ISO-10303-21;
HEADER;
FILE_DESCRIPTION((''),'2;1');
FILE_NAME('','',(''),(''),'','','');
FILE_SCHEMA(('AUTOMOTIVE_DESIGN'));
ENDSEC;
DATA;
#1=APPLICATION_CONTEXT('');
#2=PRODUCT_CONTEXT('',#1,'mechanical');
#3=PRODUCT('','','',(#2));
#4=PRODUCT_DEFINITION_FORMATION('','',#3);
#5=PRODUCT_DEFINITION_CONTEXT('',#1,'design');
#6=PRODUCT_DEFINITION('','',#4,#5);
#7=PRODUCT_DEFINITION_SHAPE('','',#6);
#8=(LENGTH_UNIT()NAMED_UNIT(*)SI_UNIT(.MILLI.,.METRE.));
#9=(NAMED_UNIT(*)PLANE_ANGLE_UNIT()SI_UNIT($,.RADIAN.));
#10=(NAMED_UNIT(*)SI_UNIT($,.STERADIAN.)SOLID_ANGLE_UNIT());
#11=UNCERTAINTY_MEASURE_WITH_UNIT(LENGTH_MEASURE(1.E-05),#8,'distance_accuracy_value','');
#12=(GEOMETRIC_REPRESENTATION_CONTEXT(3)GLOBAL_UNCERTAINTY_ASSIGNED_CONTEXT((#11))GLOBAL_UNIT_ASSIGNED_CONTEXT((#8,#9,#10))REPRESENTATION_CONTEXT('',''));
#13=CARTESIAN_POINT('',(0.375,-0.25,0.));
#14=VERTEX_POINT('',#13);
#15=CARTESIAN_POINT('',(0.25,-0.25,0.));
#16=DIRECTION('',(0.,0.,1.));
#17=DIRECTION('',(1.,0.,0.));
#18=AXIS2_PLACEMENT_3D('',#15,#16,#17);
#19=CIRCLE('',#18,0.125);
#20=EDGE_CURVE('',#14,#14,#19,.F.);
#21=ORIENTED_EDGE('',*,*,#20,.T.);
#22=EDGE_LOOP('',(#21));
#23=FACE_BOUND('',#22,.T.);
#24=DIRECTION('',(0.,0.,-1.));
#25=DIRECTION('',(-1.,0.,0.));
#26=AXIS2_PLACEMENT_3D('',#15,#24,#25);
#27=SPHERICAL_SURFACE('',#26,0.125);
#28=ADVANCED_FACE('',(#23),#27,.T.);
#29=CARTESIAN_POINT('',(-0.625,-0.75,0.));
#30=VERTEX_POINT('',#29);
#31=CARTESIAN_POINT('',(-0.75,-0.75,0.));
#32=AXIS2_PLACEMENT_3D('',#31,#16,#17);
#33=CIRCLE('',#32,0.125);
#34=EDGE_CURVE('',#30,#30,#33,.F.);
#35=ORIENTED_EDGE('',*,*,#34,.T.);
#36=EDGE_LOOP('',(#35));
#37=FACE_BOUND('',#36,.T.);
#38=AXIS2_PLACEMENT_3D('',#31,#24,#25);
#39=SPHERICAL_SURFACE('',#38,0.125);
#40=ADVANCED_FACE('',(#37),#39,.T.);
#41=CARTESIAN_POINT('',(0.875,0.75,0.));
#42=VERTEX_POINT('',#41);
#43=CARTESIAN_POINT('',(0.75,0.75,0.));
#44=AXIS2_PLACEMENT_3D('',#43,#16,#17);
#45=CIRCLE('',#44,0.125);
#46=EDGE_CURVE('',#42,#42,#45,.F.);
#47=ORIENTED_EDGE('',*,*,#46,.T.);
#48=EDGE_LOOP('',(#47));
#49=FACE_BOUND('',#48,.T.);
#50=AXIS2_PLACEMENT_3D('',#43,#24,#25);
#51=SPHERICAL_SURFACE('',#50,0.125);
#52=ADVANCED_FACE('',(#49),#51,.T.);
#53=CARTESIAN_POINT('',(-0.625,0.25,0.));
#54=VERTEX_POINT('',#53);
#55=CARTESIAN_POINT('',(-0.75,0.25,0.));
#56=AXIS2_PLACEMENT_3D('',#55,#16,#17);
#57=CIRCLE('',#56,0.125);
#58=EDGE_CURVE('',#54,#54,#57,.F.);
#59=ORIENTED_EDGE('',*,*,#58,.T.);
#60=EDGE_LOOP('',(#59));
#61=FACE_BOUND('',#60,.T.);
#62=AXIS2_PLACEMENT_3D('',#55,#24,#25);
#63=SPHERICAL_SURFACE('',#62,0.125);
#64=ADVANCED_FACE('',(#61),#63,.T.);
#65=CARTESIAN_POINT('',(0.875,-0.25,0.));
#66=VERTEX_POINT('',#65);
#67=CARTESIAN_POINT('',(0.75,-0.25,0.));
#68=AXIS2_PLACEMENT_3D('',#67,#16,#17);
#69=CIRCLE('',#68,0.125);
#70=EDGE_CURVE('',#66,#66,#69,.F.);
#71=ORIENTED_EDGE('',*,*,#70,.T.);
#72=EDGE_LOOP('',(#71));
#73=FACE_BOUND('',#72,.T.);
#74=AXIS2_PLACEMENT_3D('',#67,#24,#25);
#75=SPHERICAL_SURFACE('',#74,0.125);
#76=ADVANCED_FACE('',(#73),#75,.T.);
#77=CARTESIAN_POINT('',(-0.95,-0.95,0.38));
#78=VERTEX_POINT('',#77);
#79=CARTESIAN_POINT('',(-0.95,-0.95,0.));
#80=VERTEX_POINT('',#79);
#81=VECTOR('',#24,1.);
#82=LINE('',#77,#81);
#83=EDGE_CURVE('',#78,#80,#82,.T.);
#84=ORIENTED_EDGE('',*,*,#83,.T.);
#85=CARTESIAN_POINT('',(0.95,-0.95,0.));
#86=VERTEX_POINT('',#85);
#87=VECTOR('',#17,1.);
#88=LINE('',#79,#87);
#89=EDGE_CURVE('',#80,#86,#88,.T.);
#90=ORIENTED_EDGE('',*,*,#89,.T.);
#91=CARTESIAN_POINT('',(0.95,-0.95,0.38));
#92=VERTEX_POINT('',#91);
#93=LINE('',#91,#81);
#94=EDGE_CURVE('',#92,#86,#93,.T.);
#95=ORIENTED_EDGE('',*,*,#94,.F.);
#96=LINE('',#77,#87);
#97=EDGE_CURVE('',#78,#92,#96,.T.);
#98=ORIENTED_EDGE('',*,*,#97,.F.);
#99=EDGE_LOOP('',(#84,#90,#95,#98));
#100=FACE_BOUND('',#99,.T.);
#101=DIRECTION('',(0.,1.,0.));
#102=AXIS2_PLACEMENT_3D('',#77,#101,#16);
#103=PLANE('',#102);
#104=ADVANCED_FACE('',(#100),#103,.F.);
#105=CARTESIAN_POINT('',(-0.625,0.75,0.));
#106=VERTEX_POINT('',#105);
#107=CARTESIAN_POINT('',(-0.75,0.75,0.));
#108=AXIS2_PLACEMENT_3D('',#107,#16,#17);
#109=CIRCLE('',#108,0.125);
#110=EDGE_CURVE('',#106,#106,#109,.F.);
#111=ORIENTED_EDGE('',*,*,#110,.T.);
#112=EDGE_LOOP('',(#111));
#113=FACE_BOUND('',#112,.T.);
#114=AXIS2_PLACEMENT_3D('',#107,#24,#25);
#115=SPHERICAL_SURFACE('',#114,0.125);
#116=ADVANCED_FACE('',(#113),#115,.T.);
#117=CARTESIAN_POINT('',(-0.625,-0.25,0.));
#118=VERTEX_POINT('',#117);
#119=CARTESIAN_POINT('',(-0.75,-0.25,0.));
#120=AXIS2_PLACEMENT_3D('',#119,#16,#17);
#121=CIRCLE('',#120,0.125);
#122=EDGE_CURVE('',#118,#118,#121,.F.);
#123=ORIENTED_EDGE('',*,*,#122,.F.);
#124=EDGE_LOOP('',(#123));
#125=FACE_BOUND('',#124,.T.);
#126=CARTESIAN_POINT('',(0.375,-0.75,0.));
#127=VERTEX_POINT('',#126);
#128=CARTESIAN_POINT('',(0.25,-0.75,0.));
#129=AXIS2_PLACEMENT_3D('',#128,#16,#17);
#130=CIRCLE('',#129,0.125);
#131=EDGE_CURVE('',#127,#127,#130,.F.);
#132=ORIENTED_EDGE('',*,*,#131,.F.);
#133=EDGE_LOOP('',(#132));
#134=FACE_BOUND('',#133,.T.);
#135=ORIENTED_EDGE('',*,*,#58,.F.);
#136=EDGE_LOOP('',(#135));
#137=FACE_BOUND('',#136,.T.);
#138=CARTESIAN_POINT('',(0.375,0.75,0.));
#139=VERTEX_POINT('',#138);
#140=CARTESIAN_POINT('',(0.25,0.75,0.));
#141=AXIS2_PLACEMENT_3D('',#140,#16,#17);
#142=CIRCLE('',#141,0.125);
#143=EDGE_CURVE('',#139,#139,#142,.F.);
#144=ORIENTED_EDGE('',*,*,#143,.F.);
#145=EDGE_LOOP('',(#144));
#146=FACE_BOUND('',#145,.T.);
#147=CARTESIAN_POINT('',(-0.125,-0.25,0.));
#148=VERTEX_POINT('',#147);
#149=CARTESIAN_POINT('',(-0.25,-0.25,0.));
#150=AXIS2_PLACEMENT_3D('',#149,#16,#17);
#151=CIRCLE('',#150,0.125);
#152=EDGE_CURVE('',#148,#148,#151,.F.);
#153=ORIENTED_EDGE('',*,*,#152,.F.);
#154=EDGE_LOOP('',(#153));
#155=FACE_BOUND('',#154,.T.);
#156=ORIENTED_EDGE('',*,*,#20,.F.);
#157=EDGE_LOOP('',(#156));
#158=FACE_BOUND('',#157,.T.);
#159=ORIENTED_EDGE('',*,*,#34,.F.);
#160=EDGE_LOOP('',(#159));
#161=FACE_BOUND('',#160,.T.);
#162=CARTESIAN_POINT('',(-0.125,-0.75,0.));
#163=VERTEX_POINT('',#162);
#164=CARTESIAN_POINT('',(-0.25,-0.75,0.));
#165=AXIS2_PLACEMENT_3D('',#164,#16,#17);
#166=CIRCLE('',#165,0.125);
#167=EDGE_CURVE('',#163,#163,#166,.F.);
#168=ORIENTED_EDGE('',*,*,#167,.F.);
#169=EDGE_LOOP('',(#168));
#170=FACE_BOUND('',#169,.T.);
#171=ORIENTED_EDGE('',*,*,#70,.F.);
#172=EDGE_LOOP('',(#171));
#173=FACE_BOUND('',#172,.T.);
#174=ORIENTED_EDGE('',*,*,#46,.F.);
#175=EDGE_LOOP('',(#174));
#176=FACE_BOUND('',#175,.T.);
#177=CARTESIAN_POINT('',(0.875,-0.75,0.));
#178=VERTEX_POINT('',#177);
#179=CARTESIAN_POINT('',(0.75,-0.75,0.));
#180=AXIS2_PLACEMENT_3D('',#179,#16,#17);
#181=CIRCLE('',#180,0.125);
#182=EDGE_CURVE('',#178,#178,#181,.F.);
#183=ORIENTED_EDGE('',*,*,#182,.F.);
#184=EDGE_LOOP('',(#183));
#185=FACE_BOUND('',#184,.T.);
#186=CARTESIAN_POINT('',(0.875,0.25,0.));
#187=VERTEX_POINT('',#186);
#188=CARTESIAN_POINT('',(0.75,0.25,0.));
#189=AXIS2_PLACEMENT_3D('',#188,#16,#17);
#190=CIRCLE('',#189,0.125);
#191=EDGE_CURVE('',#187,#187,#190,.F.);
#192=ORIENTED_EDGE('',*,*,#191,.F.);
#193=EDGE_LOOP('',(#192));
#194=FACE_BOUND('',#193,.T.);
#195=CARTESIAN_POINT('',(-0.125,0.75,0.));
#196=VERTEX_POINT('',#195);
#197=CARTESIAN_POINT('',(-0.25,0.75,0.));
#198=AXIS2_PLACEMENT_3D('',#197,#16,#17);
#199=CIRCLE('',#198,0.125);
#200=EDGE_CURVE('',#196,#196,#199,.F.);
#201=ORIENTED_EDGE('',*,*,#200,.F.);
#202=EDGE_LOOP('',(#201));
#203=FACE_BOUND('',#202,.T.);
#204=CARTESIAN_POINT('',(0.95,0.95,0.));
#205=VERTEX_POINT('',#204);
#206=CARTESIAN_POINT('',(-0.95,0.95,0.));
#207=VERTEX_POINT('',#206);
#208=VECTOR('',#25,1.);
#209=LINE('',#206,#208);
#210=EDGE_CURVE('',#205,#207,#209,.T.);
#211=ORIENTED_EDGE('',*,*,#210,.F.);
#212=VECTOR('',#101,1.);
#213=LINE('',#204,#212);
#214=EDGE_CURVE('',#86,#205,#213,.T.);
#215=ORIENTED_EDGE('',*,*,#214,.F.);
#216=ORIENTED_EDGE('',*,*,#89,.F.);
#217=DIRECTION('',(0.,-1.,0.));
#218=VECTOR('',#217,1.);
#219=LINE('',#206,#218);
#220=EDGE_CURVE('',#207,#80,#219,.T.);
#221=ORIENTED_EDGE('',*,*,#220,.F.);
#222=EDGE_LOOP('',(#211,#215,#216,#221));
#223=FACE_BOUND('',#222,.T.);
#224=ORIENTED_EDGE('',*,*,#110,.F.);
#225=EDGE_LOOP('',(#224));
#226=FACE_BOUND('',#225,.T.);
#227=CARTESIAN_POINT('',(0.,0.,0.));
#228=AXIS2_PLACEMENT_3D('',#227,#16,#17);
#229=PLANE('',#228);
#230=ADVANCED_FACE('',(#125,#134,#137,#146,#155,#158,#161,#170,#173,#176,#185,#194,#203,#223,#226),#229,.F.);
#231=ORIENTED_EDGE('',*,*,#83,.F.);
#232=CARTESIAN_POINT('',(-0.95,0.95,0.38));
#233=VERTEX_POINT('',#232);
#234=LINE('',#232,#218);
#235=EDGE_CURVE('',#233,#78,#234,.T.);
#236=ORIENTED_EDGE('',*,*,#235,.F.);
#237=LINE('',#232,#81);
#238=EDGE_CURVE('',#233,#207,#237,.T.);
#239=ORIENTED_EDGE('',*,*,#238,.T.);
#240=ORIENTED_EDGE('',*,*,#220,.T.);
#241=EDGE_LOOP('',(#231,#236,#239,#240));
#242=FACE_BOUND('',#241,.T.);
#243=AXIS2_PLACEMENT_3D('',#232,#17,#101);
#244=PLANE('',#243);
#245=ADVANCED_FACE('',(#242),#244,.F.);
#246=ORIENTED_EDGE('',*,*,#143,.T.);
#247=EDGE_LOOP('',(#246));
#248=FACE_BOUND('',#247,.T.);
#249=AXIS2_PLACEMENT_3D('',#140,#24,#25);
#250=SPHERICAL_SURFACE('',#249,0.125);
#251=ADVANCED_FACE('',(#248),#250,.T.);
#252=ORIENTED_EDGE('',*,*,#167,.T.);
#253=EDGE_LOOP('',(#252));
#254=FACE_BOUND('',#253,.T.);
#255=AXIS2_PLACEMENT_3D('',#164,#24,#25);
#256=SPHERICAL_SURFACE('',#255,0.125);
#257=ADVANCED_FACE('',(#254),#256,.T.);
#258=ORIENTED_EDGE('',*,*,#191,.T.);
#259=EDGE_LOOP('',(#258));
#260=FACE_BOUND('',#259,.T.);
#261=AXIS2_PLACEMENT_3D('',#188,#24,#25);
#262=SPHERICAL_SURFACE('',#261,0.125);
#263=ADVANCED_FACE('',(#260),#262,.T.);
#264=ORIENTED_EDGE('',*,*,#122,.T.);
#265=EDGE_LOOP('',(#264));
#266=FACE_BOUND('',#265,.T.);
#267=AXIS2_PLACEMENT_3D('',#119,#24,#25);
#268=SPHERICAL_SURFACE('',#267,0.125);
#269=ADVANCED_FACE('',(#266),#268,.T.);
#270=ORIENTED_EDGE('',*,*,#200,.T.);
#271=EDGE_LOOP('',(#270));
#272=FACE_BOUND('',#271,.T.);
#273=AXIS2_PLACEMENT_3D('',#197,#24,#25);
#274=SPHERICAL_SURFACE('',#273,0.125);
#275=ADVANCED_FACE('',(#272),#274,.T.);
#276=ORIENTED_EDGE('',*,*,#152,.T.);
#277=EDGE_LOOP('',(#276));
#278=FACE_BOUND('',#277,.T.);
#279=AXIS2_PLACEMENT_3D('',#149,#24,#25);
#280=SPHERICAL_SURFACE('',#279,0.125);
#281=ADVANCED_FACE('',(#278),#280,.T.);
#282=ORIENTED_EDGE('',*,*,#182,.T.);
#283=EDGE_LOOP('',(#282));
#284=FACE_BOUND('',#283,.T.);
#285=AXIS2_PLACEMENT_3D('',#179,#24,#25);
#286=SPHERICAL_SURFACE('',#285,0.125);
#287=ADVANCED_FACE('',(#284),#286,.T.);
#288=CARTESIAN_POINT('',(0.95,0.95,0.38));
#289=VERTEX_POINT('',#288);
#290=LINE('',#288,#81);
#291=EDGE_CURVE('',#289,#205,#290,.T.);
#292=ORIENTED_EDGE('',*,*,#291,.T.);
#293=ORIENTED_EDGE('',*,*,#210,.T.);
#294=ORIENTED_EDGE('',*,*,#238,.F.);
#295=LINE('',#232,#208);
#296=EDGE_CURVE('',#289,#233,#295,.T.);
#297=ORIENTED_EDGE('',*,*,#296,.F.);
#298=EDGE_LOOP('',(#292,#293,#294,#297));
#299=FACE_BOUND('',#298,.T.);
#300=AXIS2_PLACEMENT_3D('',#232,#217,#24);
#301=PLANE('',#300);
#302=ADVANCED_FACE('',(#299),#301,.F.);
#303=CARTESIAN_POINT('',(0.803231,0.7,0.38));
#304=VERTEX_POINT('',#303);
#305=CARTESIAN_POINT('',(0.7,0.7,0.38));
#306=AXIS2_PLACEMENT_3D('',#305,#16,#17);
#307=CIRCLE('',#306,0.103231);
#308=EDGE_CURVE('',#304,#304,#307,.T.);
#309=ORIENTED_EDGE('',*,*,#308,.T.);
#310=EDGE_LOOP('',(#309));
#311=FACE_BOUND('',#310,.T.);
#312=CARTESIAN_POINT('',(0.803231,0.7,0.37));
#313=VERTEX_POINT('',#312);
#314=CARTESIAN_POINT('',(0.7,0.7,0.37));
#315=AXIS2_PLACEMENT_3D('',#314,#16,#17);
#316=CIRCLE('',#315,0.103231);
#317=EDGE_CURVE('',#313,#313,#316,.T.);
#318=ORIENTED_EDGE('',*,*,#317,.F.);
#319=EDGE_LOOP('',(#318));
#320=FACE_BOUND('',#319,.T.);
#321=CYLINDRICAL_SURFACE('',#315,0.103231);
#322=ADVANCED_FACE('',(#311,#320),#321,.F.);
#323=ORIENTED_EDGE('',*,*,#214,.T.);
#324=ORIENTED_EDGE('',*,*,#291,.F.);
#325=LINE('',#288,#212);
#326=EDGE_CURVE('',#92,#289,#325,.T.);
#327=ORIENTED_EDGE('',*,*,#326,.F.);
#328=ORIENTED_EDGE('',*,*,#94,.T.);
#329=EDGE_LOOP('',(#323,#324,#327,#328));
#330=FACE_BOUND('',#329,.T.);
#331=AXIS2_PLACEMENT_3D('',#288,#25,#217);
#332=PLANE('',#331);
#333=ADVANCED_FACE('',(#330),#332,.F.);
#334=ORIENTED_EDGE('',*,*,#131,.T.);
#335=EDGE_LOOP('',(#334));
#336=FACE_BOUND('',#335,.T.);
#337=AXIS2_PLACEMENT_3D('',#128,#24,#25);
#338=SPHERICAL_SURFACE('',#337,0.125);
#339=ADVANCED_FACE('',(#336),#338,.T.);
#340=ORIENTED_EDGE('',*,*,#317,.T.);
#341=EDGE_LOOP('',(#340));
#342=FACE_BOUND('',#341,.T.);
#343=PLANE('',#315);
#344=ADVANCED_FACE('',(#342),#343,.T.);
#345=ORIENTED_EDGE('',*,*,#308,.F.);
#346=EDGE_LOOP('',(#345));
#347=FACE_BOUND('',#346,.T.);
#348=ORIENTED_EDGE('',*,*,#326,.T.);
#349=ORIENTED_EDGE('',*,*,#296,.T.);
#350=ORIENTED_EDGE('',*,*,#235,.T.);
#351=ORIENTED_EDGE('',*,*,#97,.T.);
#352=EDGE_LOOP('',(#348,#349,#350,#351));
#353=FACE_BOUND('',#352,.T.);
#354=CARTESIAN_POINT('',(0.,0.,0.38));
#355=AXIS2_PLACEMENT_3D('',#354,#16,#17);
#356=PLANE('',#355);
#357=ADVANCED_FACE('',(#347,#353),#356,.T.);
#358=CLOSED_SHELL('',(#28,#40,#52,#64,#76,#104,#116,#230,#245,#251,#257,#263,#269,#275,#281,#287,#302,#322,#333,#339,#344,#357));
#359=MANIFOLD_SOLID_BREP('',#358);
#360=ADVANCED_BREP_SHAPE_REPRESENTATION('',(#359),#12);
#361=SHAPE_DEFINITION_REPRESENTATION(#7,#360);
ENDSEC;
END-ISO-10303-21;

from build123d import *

# Parameters (mm, degrees)
SKETCH1_W           = 1.9
SKETCH1_H           = 1.9
BOSS_EXTRUDE1_DEPTH = 0.38
SKETCH2_R           = 0.125
BOSS_EXTRUDE2_DEPTH = 0.125
FILLET1_R           = 0.125
SKETCH3_R           = 0.103231073
CUT_EXTRUDE1_DEPTH  = 0.01


with BuildPart() as part:
    # Sketch1 → Boss-Extrude1 (new body)
    with BuildSketch(Plane.XY):
        Rectangle(SKETCH1_W, SKETCH1_H)
    extrude(amount=BOSS_EXTRUDE1_DEPTH)

    # Sketch2 → Boss-Extrude2 (add)
    with BuildSketch(Plane(origin=(0, 0, 0), x_dir=(-1, 0, 0), z_dir=(0, 0, -1))):
        with Locations(Location((0.75, 0.75, 0), (0, 0, 180))):
            Circle(SKETCH2_R)
        with Locations(Location((0.25, 0.75, 0), (0, 0, 180))):
            Circle(SKETCH2_R)
        with Locations(Location((-0.25, 0.75, 0), (0, 0, 180))):
            Circle(SKETCH2_R)
        with Locations(Location((-0.75, 0.75, 0), (0, 0, 180))):
            Circle(SKETCH2_R)
        with Locations(Location((-0.75, 0.25, 0), (0, 0, 180))):
            Circle(SKETCH2_R)
        with Locations(Location((0.25, -0.25, 0), (0, 0, 180))):
            Circle(SKETCH2_R)
        with Locations(Location((-0.25, -0.25, 0), (0, 0, 180))):
            Circle(SKETCH2_R)
        with Locations(Location((-0.75, -0.25, 0), (0, 0, 180))):
            Circle(SKETCH2_R)
        with Locations(Location((0.25, -0.75, 0), (0, 0, 180))):
            Circle(SKETCH2_R)
        with Locations(Location((-0.25, -0.75, 0), (0, 0, 180))):
            Circle(SKETCH2_R)
        with Locations(Location((-0.75, -0.75, 0), (0, 0, 180))):
            Circle(SKETCH2_R)
        with Locations(Location((0.75, 0.25, 0), (0, 0, 180))):
            Circle(SKETCH2_R)
        with Locations(Location((0.75, -0.25, 0), (0, 0, 180))):
            Circle(SKETCH2_R)
        with Locations(Location((0.75, -0.75, 0), (0, 0, 180))):
            Circle(SKETCH2_R)
    extrude(amount=BOSS_EXTRUDE2_DEPTH)

    # Fillet1
    fillet1_edges = [part.edges().sort_by_distance(p)[0] for p in [
        (-0.875, 0.75, -0.125),
        (-0.375, 0.75, -0.125),
        (0.125, 0.75, -0.125),
        (0.625, 0.75, -0.125),
        (0.625, 0.25, -0.125),
        (-0.375, -0.25, -0.125),
        (0.125, -0.25, -0.125),
        (0.625, -0.25, -0.125),
        (-0.375, -0.75, -0.125),
        (0.125, -0.75, -0.125),
        (0.625, -0.75, -0.125),
        (-0.875, 0.25, -0.125),
        (-0.875, -0.25, -0.125),
        (-0.875, -0.75, -0.125),
    ]]
    fillet(fillet1_edges, radius=FILLET1_R - 0.0001)  # a hair under: the kernel refuses the full size

    # Sketch3 → Cut-Extrude1 (cut)
    with BuildSketch(Plane.XY.offset(0.38)):
        with Locations((0.7, 0.7)):
            Circle(SKETCH3_R)
    extrude(amount=-CUT_EXTRUDE1_DEPTH, mode=Mode.SUBTRACT)


solid = part.part
